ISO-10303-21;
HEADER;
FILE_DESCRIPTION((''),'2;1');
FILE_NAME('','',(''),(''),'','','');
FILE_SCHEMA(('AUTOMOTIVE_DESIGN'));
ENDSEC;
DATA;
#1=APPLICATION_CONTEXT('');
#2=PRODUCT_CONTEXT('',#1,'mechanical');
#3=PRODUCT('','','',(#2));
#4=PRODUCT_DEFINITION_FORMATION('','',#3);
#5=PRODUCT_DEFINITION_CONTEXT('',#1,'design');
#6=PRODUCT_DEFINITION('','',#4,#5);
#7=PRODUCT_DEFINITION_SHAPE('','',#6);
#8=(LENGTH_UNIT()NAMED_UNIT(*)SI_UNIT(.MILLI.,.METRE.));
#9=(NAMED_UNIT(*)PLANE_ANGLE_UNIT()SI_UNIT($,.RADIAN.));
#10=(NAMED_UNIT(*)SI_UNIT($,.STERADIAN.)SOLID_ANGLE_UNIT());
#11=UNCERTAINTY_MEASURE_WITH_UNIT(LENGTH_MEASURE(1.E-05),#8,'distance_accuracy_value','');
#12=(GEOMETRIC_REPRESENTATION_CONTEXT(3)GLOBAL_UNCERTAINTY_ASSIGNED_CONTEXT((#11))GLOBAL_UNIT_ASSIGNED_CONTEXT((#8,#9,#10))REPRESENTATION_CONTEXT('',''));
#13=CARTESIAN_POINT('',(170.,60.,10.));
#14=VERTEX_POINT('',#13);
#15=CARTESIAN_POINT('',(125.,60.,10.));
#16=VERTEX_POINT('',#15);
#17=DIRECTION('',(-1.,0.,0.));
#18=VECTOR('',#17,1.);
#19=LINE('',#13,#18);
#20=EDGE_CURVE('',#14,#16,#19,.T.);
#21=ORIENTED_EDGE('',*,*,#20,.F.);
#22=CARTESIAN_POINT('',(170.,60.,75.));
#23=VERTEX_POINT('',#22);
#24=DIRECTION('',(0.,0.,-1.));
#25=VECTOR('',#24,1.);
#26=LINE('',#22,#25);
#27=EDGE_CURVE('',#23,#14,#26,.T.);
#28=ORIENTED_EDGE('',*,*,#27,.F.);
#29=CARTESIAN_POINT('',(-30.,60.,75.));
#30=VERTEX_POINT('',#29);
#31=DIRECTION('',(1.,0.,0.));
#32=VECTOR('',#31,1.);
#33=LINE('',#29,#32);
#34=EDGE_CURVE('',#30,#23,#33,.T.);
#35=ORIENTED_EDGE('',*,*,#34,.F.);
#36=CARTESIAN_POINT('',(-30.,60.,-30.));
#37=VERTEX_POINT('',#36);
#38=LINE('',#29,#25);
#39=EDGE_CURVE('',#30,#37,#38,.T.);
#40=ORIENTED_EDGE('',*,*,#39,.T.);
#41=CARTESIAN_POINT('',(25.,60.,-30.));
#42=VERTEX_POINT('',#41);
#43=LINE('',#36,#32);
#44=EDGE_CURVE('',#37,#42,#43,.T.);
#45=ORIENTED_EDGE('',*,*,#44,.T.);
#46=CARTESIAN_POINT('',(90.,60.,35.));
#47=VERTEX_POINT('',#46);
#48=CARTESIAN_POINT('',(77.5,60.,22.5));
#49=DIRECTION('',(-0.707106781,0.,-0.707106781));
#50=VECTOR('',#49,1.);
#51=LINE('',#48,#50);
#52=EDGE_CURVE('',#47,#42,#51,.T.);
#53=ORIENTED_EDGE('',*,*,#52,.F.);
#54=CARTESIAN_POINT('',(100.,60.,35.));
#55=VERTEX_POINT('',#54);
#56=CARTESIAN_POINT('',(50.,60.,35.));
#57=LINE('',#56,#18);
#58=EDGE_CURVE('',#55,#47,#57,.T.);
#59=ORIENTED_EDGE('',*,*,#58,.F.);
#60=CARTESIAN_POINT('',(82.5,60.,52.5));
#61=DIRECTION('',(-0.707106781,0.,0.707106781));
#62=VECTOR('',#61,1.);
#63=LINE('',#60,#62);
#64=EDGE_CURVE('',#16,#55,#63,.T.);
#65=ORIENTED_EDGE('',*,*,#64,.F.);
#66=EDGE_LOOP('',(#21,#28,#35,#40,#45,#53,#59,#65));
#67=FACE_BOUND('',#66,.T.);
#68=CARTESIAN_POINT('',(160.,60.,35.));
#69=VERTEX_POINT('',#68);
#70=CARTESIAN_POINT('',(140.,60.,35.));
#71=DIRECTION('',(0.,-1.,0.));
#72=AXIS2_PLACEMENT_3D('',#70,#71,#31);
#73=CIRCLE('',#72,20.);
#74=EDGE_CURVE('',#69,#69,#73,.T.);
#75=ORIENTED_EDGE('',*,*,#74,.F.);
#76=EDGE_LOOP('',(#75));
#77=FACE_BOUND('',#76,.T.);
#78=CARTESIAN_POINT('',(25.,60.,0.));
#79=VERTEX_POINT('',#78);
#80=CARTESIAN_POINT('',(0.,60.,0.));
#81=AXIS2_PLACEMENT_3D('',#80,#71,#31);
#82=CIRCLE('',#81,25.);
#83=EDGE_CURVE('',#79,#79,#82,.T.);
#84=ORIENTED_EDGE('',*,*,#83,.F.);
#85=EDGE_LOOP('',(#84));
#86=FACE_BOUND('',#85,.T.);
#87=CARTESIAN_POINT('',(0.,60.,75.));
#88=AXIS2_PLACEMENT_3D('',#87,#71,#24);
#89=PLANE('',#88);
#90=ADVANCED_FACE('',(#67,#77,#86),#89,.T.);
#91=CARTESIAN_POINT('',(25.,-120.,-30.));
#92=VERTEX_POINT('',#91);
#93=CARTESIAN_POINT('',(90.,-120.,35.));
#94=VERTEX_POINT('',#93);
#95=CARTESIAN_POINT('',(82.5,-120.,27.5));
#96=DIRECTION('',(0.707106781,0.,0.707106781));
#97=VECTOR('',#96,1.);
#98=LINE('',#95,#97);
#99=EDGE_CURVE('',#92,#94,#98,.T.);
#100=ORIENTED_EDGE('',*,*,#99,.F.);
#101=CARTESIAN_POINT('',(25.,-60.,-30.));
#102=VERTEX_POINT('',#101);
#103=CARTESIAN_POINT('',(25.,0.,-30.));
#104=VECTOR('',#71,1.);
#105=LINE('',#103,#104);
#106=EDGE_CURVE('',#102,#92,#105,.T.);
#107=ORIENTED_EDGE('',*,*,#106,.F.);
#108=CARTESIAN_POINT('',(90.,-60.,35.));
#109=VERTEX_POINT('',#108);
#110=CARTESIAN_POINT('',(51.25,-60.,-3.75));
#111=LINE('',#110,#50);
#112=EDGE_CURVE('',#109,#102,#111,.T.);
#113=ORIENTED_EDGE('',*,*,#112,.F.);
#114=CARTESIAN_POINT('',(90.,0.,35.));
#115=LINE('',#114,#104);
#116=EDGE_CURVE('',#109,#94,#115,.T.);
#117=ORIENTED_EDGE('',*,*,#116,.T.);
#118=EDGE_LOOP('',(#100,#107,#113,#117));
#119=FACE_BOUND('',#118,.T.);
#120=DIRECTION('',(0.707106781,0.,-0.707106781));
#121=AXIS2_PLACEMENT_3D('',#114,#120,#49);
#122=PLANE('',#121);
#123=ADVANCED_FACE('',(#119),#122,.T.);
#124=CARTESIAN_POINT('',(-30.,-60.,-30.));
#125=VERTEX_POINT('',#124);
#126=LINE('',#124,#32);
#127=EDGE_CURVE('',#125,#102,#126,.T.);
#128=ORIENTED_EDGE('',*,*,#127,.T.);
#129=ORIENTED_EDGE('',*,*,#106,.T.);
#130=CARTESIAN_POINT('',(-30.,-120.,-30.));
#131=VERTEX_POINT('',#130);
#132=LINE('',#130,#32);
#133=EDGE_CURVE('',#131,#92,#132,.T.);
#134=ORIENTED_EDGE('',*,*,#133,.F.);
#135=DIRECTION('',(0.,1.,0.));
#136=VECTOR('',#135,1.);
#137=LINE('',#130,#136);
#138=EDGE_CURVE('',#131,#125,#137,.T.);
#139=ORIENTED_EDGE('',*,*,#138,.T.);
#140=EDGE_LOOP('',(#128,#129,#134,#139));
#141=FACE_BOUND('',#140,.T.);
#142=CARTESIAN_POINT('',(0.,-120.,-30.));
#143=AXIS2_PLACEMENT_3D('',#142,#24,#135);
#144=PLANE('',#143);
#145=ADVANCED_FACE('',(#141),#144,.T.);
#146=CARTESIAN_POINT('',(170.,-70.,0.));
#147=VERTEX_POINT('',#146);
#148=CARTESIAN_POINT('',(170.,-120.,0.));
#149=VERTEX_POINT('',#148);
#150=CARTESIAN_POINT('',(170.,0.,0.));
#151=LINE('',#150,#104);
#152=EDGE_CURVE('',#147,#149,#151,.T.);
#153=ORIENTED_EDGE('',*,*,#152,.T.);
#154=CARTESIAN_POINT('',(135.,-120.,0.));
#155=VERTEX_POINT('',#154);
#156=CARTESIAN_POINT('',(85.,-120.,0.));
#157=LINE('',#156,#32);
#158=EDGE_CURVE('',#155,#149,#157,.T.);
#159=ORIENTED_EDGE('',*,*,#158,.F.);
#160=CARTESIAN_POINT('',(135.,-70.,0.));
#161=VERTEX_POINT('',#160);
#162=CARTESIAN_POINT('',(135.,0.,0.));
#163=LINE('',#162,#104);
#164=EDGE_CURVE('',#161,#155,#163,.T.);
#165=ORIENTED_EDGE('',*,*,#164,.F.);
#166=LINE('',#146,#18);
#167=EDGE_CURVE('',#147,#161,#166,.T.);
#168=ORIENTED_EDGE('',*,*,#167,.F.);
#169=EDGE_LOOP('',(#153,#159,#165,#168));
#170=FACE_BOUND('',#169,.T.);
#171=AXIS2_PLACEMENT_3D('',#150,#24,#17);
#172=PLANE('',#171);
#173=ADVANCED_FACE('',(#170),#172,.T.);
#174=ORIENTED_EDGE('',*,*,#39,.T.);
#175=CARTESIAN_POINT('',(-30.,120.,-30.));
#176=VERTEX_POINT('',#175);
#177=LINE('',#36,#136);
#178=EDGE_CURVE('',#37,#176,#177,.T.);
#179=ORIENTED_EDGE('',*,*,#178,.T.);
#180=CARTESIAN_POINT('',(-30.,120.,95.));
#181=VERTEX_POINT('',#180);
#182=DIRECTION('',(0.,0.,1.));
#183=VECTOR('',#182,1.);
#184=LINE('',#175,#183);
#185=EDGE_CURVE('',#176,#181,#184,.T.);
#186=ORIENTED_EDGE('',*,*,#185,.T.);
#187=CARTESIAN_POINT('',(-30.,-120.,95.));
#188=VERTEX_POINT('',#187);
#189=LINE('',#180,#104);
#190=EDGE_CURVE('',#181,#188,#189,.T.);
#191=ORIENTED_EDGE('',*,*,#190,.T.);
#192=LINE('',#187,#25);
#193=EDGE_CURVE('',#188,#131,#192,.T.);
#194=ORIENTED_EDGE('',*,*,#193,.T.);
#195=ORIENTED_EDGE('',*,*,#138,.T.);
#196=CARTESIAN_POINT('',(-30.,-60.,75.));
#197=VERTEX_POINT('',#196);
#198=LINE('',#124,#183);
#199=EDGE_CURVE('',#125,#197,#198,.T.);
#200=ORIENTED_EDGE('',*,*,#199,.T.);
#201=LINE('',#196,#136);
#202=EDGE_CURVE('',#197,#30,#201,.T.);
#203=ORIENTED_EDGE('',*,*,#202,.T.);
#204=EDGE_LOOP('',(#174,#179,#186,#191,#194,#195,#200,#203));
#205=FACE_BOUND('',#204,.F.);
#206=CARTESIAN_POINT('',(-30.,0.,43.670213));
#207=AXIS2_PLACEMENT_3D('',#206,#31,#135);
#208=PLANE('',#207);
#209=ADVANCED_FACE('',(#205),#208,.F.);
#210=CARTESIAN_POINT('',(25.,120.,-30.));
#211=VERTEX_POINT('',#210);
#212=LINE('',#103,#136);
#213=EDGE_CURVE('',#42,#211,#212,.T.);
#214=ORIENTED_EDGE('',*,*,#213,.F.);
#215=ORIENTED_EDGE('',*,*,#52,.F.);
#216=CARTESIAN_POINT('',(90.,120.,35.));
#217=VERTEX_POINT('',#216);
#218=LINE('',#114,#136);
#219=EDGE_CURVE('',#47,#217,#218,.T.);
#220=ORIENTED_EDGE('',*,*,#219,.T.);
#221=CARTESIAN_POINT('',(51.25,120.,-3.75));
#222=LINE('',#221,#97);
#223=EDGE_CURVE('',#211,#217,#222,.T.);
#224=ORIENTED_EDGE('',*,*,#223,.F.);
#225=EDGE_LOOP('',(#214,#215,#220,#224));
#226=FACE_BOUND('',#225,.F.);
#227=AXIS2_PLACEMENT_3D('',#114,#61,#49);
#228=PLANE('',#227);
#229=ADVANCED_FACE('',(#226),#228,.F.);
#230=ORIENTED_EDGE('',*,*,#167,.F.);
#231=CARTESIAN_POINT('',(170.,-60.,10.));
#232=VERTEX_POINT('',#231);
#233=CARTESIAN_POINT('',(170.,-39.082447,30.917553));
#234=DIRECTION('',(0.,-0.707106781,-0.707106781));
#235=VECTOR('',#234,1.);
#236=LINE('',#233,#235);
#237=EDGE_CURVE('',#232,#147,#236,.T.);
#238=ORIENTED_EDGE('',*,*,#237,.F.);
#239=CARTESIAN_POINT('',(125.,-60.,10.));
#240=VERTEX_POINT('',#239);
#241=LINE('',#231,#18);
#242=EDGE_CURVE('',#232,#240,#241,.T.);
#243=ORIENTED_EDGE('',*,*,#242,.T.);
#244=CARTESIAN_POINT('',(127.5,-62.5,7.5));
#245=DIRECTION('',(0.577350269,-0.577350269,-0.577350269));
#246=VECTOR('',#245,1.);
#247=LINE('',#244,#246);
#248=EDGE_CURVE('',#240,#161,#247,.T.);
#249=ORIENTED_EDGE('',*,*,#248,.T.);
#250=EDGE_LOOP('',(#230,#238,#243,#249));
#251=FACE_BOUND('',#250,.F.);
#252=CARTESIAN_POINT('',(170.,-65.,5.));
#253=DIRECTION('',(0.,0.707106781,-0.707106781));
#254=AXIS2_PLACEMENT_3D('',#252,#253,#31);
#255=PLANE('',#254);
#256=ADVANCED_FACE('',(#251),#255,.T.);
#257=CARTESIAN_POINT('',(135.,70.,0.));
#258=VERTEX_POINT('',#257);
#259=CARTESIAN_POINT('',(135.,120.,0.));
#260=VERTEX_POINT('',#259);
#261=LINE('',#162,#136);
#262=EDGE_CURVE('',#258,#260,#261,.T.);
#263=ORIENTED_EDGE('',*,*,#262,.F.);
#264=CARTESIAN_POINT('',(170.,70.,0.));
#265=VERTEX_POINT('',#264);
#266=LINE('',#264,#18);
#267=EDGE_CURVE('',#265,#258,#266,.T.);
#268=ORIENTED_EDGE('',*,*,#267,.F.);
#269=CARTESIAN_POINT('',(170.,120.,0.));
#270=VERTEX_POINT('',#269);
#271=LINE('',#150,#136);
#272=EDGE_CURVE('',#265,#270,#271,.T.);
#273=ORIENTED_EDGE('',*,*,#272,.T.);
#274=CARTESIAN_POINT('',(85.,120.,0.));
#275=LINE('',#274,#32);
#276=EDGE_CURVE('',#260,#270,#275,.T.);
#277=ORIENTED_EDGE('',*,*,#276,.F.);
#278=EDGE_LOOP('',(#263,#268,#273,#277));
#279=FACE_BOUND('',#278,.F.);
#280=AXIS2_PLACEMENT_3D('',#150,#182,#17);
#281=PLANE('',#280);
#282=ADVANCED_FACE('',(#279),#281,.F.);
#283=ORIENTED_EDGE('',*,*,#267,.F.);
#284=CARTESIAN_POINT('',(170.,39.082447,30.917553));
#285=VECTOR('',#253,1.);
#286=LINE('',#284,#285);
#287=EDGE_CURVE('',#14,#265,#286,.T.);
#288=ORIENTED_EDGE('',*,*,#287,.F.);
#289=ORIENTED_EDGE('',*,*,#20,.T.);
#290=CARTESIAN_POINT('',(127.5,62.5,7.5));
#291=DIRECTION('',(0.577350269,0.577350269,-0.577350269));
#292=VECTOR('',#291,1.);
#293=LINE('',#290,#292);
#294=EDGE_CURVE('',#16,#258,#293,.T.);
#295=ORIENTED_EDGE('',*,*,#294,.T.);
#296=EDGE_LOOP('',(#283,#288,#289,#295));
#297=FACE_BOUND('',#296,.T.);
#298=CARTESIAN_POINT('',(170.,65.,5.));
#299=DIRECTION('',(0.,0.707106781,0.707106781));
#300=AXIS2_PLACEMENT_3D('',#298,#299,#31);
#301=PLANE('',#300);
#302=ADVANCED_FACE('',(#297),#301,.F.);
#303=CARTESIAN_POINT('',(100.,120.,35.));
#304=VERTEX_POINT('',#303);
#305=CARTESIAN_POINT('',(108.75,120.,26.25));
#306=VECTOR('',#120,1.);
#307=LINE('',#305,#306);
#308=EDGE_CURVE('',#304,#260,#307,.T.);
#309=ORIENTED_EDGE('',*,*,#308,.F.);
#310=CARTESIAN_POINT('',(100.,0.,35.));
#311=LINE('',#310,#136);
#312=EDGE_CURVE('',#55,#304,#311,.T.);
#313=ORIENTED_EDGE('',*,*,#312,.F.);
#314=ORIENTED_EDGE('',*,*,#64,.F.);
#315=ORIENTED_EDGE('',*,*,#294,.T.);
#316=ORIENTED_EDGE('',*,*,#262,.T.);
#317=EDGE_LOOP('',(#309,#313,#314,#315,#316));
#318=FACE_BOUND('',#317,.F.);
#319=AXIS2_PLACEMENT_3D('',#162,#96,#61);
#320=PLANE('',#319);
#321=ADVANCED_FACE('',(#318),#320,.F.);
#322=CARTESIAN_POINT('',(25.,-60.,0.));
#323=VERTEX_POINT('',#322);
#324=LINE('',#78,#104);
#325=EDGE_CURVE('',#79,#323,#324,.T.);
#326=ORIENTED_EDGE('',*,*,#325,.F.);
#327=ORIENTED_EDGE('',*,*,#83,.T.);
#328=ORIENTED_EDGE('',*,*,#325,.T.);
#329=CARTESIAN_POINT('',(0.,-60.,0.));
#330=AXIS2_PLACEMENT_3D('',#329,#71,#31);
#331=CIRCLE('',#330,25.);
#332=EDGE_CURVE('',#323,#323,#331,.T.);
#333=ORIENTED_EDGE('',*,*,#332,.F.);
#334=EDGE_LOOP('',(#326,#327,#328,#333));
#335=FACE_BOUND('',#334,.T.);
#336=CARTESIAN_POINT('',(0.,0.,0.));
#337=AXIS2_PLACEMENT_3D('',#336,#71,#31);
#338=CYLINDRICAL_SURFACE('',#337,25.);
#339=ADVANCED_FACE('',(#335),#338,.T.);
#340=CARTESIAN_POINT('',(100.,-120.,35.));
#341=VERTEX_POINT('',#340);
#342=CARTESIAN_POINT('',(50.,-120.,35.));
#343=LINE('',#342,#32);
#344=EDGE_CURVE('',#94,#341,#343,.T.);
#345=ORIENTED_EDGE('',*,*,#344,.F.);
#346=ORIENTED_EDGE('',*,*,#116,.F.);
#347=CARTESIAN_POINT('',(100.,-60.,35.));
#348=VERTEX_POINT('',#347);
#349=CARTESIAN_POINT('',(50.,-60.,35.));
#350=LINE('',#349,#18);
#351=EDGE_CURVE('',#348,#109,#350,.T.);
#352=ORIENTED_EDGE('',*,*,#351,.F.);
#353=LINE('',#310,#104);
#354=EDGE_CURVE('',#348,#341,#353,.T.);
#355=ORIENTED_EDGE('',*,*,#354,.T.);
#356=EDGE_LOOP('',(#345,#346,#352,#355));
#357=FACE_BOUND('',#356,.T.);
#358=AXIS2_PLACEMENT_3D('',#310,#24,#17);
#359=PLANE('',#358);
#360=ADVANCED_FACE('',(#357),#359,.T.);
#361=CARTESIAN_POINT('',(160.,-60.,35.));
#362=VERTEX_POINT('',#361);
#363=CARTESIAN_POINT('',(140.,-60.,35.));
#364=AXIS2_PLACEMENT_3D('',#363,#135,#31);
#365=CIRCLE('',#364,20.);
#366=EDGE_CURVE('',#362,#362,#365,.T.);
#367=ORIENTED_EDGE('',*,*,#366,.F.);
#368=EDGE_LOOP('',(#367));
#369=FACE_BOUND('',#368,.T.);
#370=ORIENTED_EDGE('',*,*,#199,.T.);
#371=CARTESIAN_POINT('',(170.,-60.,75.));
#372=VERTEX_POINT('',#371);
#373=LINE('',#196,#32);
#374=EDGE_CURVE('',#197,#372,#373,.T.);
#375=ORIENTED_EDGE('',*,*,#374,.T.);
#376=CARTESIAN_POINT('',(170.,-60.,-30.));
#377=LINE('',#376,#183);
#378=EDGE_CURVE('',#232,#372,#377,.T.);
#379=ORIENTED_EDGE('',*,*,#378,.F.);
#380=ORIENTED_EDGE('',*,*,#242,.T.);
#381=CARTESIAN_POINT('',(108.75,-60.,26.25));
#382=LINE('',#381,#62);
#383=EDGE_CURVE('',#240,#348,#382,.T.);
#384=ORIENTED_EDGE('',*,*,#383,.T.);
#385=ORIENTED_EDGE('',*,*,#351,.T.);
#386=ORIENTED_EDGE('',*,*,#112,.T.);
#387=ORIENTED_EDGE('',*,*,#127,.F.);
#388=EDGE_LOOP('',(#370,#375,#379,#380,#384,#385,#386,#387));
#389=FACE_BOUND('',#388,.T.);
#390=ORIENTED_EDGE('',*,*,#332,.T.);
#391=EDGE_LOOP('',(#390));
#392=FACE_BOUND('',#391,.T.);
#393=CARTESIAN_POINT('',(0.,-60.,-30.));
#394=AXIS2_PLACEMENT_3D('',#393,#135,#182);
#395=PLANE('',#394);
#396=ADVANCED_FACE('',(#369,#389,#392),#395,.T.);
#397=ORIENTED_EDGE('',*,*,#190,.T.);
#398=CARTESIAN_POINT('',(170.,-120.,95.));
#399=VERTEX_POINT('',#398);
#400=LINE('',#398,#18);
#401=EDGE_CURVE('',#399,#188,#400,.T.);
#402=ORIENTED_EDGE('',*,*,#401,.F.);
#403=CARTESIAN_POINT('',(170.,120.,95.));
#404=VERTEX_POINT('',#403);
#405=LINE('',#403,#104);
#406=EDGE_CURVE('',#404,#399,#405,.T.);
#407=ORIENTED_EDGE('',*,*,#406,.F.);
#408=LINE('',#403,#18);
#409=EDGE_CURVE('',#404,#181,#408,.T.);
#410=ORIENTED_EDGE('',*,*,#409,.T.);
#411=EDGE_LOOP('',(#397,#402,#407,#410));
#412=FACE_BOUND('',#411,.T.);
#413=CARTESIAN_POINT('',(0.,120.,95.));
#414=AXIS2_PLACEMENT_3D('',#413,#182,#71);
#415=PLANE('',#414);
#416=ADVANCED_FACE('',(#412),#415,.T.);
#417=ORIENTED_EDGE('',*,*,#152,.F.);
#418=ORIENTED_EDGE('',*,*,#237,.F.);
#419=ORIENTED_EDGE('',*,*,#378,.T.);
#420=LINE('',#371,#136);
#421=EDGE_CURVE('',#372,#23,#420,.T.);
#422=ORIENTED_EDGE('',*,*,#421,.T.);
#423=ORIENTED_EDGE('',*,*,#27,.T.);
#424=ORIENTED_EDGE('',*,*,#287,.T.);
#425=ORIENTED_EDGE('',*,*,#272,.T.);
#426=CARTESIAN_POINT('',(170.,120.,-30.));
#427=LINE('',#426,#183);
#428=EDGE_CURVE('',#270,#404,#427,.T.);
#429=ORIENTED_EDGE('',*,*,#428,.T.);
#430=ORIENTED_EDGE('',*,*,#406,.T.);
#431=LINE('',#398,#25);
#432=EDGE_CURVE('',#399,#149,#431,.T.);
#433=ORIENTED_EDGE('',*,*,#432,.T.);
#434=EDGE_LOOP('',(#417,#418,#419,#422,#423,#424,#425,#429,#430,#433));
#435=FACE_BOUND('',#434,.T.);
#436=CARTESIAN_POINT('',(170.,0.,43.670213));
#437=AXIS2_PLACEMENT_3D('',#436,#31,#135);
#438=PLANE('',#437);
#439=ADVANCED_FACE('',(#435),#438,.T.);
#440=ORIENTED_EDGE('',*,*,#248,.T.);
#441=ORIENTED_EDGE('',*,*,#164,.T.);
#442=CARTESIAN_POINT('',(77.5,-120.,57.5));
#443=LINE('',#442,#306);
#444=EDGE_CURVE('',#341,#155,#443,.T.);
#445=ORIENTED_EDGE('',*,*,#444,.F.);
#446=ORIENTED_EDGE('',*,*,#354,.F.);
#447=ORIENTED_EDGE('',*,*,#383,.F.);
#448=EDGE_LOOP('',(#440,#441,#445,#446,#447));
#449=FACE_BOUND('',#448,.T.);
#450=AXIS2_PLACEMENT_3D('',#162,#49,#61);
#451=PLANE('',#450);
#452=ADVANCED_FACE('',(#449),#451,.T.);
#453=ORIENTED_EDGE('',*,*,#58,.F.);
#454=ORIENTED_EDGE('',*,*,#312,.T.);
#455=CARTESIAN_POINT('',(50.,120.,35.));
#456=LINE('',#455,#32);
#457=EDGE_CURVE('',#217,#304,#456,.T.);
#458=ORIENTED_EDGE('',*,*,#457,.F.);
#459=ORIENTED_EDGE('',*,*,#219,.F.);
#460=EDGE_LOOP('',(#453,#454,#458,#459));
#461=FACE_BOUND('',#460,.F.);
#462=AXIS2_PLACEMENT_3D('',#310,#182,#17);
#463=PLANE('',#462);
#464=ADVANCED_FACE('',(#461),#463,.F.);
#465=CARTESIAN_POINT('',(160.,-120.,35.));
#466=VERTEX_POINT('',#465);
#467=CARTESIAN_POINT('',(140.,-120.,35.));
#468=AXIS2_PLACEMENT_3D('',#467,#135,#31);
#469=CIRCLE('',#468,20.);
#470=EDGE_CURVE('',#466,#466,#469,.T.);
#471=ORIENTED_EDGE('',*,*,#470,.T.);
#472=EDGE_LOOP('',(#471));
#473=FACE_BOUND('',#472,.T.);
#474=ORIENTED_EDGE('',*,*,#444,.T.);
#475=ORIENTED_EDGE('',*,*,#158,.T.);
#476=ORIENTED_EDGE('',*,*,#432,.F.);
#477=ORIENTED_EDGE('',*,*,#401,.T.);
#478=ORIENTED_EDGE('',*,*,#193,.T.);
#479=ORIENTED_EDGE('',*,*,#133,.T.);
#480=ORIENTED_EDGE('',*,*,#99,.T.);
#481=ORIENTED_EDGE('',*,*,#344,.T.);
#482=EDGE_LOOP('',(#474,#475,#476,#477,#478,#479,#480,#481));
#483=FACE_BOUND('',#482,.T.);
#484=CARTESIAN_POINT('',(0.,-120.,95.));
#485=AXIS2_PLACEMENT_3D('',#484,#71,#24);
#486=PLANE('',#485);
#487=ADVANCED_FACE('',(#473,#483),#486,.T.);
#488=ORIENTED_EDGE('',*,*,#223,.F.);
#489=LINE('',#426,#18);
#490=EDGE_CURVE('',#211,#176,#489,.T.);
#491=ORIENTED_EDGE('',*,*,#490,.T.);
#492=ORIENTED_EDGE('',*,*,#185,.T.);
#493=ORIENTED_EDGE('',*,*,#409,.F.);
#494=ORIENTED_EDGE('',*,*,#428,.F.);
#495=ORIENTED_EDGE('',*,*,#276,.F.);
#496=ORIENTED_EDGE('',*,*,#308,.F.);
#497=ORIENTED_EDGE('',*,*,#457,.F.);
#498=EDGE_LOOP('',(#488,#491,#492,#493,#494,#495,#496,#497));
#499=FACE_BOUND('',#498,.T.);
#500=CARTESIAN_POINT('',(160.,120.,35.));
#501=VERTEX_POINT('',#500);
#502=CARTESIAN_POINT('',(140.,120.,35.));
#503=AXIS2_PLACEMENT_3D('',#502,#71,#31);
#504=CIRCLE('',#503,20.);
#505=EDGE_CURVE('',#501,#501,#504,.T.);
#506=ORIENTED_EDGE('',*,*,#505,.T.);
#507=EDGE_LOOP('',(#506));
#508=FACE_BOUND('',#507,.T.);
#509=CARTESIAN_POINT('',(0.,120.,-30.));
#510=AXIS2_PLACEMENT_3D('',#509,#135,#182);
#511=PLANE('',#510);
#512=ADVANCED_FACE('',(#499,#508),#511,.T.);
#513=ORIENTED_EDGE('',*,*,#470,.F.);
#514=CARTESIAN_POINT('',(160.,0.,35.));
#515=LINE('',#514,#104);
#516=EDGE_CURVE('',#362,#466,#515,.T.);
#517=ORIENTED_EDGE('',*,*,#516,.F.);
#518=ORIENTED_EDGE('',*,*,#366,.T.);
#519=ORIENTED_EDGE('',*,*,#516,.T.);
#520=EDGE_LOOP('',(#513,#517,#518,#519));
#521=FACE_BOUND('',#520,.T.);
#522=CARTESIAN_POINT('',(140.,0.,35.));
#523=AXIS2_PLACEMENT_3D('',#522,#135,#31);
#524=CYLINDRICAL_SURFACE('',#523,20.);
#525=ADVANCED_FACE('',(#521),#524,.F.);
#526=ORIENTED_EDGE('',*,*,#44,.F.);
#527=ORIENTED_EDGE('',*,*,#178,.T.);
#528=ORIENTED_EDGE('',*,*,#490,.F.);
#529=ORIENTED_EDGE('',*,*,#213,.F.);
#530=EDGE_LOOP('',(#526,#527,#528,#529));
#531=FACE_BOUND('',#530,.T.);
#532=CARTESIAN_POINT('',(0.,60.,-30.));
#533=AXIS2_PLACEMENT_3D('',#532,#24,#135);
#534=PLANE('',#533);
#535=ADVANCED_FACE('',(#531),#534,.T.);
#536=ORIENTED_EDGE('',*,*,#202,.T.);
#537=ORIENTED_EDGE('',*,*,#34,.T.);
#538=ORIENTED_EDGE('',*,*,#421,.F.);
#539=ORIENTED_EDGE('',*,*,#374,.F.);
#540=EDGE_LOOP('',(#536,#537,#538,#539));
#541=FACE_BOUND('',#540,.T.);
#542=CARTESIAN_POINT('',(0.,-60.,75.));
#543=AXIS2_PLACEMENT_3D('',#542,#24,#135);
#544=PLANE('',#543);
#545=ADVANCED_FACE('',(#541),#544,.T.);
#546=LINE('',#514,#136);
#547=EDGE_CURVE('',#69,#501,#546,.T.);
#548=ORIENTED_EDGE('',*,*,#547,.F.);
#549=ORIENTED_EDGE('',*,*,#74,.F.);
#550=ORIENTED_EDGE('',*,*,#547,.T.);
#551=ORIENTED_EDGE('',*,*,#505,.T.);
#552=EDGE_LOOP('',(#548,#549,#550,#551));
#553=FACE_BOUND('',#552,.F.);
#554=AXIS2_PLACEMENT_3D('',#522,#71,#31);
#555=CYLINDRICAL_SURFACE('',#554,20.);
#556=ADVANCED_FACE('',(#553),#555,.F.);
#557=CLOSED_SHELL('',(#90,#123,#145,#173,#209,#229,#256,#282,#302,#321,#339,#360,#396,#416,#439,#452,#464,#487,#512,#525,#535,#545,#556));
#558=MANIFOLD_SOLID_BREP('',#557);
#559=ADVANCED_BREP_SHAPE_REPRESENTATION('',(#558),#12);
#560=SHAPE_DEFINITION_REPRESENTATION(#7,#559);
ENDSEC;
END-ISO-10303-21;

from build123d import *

# Parameters (mm, degrees)
F1_DEPTH      = 170
F1_DEPTH_BACK = 30
F2_R          = 25
F3_DEPTH      = 60
F3_DEPTH_BACK = 60
F5_DEPTH      = 120.001
F5_DEPTH_BACK = 120.001
F6_R          = 20
F7_DEPTH      = 120.001
F7_DEPTH_BACK = 120.001
F8_SIZE       = 10


# Not quite as in the source:
# - a feature names something its author has since deleted; it is built from what else it names


with BuildPart() as f1:
    # F0 (on Right) → F1 (new body, two sides)
    with BuildSketch(Plane.YZ) as f1_sk:
        Polygon((-120, 95), (-120, -30), (-60, -30), (-60, 75), (0, 75), (60, 75), (60, -30), (120, -30), (120, 95), (0, 95), align=None)
    extrude(amount=F1_DEPTH)
    extrude(f1_sk.sketch, amount=-F1_DEPTH_BACK)

    # F2 (on Front) → F3 (join, two sides)
    with BuildSketch(Plane.XZ) as f3_sk:
        Circle(F2_R)
    extrude(amount=F3_DEPTH)
    extrude(f3_sk.sketch, amount=-F3_DEPTH_BACK)

    # F4 (on Front) → F5 (cut, two sides)
    with BuildSketch(Plane.XZ) as f5_sk:
        Polygon((170, -30), (170, 0), (135, 0), (100, 35), (90, 35), (25, -30), align=None)
    extrude(amount=-F5_DEPTH, mode=Mode.SUBTRACT)
    extrude(f5_sk.sketch, amount=F5_DEPTH_BACK, mode=Mode.SUBTRACT)

    # F6 (on Front) → F7 (cut, two sides)
    with BuildSketch(Plane.XZ) as f7_sk:
        with Locations((140, 35)):
            Circle(F6_R)
    extrude(amount=-F7_DEPTH, mode=Mode.SUBTRACT)
    extrude(f7_sk.sketch, amount=F7_DEPTH_BACK, mode=Mode.SUBTRACT)

    # F8
    f8_edges = [f1.edges().sort_by_distance(p)[0] for p in [
        (152.5, -60, 0),
        (152.5, 60, 0),
    ]]
    chamfer(f8_edges, length=F8_SIZE)


solid = f1.part
